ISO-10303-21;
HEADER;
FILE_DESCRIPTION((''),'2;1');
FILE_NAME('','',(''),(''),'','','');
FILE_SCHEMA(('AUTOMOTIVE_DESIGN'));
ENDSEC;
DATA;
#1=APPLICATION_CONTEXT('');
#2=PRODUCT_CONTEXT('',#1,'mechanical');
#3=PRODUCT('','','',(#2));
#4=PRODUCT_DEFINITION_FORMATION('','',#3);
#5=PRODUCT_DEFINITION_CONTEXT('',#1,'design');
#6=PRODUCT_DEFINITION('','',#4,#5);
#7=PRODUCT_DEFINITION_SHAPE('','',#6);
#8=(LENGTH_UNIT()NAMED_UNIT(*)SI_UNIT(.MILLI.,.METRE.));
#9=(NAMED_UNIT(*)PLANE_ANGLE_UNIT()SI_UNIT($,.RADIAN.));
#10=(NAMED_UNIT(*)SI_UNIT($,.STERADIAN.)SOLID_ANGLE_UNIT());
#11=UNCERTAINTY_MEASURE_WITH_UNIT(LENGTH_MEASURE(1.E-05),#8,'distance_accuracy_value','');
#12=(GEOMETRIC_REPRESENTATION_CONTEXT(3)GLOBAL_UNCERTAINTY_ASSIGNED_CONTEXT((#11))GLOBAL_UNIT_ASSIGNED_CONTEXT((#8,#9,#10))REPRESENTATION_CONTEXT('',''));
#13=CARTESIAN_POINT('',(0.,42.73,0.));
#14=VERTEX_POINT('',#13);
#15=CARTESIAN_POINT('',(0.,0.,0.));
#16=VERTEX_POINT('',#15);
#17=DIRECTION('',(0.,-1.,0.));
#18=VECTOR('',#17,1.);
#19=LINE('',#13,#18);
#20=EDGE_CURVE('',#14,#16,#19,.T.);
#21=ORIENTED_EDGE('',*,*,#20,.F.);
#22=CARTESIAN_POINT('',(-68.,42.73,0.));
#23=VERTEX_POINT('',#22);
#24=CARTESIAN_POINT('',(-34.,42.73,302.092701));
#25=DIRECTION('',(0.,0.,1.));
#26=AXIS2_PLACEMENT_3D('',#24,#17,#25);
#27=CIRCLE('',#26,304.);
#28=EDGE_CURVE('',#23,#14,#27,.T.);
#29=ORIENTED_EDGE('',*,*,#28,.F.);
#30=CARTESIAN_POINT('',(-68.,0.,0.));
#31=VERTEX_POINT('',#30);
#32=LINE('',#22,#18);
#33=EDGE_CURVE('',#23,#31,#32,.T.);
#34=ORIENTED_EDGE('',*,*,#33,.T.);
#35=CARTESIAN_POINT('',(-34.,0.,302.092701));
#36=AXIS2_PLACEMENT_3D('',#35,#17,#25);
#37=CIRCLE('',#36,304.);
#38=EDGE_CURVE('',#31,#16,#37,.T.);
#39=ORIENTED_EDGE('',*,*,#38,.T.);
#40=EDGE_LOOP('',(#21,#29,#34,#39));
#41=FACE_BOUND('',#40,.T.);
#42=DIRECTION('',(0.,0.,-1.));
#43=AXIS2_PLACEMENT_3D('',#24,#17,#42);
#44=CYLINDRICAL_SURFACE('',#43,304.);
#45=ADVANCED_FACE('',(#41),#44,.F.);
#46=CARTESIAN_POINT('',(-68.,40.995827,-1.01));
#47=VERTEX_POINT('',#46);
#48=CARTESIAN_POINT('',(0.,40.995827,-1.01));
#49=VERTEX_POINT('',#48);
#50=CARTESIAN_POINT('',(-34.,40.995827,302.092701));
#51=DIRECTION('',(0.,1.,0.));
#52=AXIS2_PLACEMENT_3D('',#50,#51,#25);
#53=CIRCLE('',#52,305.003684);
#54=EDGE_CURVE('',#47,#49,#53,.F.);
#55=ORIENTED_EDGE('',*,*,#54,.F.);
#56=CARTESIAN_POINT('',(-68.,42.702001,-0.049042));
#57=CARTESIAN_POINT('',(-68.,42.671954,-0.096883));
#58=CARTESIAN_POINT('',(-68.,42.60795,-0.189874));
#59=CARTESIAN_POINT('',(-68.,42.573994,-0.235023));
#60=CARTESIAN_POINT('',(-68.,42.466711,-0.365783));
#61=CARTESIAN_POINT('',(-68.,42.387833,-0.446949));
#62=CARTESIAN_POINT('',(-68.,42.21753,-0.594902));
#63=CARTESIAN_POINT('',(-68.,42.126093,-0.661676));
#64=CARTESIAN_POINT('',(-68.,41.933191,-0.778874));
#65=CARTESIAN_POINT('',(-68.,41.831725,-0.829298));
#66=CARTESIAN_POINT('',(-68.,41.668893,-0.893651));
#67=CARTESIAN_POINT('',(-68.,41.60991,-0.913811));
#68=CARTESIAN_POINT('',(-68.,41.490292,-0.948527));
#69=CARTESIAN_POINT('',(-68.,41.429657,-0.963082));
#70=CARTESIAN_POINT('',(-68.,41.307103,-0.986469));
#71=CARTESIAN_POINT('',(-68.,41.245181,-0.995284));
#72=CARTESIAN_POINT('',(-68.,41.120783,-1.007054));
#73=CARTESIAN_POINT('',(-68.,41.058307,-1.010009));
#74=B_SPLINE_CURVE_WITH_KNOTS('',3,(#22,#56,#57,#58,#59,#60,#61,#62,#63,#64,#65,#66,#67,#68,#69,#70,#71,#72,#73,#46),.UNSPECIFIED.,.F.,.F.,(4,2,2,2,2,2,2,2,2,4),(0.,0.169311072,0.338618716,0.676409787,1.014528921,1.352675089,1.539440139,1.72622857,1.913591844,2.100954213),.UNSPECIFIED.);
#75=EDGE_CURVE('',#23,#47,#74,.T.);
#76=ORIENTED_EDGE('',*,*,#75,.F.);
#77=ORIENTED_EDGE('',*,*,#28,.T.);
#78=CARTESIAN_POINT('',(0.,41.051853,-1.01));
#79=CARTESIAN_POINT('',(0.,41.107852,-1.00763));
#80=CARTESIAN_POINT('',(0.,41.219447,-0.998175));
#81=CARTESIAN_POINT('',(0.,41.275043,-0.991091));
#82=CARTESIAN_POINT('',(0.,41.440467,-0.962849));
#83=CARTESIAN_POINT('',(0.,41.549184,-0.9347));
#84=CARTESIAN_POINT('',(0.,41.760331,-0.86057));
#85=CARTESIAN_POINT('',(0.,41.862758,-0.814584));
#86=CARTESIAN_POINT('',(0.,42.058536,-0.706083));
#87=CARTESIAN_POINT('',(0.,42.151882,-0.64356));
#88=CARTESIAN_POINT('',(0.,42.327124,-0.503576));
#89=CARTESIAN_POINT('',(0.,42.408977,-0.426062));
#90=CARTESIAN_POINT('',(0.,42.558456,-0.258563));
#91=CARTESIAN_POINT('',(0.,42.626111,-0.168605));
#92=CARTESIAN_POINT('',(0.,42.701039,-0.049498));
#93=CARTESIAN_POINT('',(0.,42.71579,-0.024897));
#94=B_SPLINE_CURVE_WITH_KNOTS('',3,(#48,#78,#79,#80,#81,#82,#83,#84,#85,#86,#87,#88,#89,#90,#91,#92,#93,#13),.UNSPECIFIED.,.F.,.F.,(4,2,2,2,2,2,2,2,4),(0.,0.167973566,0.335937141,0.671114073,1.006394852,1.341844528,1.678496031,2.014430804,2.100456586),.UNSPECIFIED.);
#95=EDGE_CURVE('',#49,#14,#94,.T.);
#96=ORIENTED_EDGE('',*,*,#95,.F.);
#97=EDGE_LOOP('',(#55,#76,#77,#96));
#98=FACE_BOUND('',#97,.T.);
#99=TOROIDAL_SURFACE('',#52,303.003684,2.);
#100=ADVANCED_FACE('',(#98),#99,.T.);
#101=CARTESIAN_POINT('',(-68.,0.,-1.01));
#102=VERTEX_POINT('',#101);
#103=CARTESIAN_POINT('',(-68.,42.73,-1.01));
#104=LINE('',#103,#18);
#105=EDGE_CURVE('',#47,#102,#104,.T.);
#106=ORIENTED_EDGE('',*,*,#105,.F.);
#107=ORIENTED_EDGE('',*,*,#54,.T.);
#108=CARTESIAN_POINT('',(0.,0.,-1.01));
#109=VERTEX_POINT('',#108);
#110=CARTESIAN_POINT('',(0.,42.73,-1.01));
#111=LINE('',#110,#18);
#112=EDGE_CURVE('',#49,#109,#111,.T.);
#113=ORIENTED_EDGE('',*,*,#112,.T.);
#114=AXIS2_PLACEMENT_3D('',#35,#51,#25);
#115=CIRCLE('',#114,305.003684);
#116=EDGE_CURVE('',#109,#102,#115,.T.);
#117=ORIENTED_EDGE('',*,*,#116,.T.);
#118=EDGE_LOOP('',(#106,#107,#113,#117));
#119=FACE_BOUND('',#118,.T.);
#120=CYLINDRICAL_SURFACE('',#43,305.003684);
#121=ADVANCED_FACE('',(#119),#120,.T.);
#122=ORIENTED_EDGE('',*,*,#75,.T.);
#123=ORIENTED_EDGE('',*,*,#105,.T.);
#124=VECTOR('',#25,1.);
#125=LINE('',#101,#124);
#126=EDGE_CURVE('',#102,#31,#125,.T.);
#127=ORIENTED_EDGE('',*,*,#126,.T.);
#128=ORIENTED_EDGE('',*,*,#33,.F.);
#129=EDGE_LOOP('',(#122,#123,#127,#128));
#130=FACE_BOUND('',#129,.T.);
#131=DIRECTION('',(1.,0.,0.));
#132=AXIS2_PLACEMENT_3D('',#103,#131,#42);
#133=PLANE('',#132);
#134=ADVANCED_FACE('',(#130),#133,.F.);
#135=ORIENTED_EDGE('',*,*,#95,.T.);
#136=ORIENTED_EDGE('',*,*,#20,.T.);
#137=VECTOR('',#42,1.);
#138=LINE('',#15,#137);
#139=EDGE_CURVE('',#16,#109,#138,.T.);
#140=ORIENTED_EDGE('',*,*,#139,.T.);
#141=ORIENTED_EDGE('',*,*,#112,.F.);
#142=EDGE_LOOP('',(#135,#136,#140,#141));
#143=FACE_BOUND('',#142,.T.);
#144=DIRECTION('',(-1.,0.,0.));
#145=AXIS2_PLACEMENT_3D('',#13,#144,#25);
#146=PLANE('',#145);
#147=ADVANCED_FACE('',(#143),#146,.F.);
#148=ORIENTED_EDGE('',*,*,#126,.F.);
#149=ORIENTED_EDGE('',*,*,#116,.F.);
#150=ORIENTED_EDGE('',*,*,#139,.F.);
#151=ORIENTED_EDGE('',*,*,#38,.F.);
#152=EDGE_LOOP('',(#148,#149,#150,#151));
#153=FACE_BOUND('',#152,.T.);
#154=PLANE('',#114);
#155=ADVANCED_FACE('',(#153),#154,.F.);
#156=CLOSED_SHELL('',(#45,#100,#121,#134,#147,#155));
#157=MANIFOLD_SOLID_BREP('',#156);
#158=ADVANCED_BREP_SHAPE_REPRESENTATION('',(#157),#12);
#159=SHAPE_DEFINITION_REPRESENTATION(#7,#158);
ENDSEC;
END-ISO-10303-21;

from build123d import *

# Parameters (mm, degrees)
BOSS_EXTRUDE1_DEPTH = 42.73
FILLET1_R           = 2


with BuildPart() as part:
    # Sketch1 → Boss-Extrude1 (new body)
    with BuildSketch(Plane(origin=(0, 0, 0), x_dir=(1, 0, 0), z_dir=(0, 1, 0))):
        with BuildLine():
            Line((0, 0), (0, 1.01))
            ThreePointArc((0, 1.01), (-34, 2.910983164), (-68, 1.01))
            Line((-68, 1.01), (-68, 0))
            ThreePointArc((-68, 0), (-34, 1.907298996), (0, 0))
        make_face()
    extrude(amount=BOSS_EXTRUDE1_DEPTH)

    # Fillet1
    # the kernel refuses this fillet: 2 mm, written as the material it takes off along each edge
    with BuildSketch(Plane(origin=(-34, 42.73, 302.092701004), x_dir=(0.12558820580413357, 0, -0.9920824575421635), z_dir=(0.9920824575421635, 0, 0.12558820580413357))) as fillet1_piece_1:
        with BuildLine():
            CenterArc((303.003684168, -1.734172645), FILLET1_R, 0, 60.121796646)
            Line((304, 0), (304.019926317, 0.034683453))
            ThreePointArc((304.019926317, 0.034683453), (304.501842084, 0.04), (305.003684168, 0.04))
            Line((305.003684168, 0.04), (305.043684168, 0))
            Line((305.043684168, 0), (305.043684168, -1.734172645))
            Line((305.043684168, -1.734172645), (305.003684168, -1.734172645))
        make_face()
    revolve(axis=Axis((-34, 42.73, 302.092701004), (0, 1, 0)), revolution_arc=14.429450366, mode=Mode.SUBTRACT)


solid = part.part
